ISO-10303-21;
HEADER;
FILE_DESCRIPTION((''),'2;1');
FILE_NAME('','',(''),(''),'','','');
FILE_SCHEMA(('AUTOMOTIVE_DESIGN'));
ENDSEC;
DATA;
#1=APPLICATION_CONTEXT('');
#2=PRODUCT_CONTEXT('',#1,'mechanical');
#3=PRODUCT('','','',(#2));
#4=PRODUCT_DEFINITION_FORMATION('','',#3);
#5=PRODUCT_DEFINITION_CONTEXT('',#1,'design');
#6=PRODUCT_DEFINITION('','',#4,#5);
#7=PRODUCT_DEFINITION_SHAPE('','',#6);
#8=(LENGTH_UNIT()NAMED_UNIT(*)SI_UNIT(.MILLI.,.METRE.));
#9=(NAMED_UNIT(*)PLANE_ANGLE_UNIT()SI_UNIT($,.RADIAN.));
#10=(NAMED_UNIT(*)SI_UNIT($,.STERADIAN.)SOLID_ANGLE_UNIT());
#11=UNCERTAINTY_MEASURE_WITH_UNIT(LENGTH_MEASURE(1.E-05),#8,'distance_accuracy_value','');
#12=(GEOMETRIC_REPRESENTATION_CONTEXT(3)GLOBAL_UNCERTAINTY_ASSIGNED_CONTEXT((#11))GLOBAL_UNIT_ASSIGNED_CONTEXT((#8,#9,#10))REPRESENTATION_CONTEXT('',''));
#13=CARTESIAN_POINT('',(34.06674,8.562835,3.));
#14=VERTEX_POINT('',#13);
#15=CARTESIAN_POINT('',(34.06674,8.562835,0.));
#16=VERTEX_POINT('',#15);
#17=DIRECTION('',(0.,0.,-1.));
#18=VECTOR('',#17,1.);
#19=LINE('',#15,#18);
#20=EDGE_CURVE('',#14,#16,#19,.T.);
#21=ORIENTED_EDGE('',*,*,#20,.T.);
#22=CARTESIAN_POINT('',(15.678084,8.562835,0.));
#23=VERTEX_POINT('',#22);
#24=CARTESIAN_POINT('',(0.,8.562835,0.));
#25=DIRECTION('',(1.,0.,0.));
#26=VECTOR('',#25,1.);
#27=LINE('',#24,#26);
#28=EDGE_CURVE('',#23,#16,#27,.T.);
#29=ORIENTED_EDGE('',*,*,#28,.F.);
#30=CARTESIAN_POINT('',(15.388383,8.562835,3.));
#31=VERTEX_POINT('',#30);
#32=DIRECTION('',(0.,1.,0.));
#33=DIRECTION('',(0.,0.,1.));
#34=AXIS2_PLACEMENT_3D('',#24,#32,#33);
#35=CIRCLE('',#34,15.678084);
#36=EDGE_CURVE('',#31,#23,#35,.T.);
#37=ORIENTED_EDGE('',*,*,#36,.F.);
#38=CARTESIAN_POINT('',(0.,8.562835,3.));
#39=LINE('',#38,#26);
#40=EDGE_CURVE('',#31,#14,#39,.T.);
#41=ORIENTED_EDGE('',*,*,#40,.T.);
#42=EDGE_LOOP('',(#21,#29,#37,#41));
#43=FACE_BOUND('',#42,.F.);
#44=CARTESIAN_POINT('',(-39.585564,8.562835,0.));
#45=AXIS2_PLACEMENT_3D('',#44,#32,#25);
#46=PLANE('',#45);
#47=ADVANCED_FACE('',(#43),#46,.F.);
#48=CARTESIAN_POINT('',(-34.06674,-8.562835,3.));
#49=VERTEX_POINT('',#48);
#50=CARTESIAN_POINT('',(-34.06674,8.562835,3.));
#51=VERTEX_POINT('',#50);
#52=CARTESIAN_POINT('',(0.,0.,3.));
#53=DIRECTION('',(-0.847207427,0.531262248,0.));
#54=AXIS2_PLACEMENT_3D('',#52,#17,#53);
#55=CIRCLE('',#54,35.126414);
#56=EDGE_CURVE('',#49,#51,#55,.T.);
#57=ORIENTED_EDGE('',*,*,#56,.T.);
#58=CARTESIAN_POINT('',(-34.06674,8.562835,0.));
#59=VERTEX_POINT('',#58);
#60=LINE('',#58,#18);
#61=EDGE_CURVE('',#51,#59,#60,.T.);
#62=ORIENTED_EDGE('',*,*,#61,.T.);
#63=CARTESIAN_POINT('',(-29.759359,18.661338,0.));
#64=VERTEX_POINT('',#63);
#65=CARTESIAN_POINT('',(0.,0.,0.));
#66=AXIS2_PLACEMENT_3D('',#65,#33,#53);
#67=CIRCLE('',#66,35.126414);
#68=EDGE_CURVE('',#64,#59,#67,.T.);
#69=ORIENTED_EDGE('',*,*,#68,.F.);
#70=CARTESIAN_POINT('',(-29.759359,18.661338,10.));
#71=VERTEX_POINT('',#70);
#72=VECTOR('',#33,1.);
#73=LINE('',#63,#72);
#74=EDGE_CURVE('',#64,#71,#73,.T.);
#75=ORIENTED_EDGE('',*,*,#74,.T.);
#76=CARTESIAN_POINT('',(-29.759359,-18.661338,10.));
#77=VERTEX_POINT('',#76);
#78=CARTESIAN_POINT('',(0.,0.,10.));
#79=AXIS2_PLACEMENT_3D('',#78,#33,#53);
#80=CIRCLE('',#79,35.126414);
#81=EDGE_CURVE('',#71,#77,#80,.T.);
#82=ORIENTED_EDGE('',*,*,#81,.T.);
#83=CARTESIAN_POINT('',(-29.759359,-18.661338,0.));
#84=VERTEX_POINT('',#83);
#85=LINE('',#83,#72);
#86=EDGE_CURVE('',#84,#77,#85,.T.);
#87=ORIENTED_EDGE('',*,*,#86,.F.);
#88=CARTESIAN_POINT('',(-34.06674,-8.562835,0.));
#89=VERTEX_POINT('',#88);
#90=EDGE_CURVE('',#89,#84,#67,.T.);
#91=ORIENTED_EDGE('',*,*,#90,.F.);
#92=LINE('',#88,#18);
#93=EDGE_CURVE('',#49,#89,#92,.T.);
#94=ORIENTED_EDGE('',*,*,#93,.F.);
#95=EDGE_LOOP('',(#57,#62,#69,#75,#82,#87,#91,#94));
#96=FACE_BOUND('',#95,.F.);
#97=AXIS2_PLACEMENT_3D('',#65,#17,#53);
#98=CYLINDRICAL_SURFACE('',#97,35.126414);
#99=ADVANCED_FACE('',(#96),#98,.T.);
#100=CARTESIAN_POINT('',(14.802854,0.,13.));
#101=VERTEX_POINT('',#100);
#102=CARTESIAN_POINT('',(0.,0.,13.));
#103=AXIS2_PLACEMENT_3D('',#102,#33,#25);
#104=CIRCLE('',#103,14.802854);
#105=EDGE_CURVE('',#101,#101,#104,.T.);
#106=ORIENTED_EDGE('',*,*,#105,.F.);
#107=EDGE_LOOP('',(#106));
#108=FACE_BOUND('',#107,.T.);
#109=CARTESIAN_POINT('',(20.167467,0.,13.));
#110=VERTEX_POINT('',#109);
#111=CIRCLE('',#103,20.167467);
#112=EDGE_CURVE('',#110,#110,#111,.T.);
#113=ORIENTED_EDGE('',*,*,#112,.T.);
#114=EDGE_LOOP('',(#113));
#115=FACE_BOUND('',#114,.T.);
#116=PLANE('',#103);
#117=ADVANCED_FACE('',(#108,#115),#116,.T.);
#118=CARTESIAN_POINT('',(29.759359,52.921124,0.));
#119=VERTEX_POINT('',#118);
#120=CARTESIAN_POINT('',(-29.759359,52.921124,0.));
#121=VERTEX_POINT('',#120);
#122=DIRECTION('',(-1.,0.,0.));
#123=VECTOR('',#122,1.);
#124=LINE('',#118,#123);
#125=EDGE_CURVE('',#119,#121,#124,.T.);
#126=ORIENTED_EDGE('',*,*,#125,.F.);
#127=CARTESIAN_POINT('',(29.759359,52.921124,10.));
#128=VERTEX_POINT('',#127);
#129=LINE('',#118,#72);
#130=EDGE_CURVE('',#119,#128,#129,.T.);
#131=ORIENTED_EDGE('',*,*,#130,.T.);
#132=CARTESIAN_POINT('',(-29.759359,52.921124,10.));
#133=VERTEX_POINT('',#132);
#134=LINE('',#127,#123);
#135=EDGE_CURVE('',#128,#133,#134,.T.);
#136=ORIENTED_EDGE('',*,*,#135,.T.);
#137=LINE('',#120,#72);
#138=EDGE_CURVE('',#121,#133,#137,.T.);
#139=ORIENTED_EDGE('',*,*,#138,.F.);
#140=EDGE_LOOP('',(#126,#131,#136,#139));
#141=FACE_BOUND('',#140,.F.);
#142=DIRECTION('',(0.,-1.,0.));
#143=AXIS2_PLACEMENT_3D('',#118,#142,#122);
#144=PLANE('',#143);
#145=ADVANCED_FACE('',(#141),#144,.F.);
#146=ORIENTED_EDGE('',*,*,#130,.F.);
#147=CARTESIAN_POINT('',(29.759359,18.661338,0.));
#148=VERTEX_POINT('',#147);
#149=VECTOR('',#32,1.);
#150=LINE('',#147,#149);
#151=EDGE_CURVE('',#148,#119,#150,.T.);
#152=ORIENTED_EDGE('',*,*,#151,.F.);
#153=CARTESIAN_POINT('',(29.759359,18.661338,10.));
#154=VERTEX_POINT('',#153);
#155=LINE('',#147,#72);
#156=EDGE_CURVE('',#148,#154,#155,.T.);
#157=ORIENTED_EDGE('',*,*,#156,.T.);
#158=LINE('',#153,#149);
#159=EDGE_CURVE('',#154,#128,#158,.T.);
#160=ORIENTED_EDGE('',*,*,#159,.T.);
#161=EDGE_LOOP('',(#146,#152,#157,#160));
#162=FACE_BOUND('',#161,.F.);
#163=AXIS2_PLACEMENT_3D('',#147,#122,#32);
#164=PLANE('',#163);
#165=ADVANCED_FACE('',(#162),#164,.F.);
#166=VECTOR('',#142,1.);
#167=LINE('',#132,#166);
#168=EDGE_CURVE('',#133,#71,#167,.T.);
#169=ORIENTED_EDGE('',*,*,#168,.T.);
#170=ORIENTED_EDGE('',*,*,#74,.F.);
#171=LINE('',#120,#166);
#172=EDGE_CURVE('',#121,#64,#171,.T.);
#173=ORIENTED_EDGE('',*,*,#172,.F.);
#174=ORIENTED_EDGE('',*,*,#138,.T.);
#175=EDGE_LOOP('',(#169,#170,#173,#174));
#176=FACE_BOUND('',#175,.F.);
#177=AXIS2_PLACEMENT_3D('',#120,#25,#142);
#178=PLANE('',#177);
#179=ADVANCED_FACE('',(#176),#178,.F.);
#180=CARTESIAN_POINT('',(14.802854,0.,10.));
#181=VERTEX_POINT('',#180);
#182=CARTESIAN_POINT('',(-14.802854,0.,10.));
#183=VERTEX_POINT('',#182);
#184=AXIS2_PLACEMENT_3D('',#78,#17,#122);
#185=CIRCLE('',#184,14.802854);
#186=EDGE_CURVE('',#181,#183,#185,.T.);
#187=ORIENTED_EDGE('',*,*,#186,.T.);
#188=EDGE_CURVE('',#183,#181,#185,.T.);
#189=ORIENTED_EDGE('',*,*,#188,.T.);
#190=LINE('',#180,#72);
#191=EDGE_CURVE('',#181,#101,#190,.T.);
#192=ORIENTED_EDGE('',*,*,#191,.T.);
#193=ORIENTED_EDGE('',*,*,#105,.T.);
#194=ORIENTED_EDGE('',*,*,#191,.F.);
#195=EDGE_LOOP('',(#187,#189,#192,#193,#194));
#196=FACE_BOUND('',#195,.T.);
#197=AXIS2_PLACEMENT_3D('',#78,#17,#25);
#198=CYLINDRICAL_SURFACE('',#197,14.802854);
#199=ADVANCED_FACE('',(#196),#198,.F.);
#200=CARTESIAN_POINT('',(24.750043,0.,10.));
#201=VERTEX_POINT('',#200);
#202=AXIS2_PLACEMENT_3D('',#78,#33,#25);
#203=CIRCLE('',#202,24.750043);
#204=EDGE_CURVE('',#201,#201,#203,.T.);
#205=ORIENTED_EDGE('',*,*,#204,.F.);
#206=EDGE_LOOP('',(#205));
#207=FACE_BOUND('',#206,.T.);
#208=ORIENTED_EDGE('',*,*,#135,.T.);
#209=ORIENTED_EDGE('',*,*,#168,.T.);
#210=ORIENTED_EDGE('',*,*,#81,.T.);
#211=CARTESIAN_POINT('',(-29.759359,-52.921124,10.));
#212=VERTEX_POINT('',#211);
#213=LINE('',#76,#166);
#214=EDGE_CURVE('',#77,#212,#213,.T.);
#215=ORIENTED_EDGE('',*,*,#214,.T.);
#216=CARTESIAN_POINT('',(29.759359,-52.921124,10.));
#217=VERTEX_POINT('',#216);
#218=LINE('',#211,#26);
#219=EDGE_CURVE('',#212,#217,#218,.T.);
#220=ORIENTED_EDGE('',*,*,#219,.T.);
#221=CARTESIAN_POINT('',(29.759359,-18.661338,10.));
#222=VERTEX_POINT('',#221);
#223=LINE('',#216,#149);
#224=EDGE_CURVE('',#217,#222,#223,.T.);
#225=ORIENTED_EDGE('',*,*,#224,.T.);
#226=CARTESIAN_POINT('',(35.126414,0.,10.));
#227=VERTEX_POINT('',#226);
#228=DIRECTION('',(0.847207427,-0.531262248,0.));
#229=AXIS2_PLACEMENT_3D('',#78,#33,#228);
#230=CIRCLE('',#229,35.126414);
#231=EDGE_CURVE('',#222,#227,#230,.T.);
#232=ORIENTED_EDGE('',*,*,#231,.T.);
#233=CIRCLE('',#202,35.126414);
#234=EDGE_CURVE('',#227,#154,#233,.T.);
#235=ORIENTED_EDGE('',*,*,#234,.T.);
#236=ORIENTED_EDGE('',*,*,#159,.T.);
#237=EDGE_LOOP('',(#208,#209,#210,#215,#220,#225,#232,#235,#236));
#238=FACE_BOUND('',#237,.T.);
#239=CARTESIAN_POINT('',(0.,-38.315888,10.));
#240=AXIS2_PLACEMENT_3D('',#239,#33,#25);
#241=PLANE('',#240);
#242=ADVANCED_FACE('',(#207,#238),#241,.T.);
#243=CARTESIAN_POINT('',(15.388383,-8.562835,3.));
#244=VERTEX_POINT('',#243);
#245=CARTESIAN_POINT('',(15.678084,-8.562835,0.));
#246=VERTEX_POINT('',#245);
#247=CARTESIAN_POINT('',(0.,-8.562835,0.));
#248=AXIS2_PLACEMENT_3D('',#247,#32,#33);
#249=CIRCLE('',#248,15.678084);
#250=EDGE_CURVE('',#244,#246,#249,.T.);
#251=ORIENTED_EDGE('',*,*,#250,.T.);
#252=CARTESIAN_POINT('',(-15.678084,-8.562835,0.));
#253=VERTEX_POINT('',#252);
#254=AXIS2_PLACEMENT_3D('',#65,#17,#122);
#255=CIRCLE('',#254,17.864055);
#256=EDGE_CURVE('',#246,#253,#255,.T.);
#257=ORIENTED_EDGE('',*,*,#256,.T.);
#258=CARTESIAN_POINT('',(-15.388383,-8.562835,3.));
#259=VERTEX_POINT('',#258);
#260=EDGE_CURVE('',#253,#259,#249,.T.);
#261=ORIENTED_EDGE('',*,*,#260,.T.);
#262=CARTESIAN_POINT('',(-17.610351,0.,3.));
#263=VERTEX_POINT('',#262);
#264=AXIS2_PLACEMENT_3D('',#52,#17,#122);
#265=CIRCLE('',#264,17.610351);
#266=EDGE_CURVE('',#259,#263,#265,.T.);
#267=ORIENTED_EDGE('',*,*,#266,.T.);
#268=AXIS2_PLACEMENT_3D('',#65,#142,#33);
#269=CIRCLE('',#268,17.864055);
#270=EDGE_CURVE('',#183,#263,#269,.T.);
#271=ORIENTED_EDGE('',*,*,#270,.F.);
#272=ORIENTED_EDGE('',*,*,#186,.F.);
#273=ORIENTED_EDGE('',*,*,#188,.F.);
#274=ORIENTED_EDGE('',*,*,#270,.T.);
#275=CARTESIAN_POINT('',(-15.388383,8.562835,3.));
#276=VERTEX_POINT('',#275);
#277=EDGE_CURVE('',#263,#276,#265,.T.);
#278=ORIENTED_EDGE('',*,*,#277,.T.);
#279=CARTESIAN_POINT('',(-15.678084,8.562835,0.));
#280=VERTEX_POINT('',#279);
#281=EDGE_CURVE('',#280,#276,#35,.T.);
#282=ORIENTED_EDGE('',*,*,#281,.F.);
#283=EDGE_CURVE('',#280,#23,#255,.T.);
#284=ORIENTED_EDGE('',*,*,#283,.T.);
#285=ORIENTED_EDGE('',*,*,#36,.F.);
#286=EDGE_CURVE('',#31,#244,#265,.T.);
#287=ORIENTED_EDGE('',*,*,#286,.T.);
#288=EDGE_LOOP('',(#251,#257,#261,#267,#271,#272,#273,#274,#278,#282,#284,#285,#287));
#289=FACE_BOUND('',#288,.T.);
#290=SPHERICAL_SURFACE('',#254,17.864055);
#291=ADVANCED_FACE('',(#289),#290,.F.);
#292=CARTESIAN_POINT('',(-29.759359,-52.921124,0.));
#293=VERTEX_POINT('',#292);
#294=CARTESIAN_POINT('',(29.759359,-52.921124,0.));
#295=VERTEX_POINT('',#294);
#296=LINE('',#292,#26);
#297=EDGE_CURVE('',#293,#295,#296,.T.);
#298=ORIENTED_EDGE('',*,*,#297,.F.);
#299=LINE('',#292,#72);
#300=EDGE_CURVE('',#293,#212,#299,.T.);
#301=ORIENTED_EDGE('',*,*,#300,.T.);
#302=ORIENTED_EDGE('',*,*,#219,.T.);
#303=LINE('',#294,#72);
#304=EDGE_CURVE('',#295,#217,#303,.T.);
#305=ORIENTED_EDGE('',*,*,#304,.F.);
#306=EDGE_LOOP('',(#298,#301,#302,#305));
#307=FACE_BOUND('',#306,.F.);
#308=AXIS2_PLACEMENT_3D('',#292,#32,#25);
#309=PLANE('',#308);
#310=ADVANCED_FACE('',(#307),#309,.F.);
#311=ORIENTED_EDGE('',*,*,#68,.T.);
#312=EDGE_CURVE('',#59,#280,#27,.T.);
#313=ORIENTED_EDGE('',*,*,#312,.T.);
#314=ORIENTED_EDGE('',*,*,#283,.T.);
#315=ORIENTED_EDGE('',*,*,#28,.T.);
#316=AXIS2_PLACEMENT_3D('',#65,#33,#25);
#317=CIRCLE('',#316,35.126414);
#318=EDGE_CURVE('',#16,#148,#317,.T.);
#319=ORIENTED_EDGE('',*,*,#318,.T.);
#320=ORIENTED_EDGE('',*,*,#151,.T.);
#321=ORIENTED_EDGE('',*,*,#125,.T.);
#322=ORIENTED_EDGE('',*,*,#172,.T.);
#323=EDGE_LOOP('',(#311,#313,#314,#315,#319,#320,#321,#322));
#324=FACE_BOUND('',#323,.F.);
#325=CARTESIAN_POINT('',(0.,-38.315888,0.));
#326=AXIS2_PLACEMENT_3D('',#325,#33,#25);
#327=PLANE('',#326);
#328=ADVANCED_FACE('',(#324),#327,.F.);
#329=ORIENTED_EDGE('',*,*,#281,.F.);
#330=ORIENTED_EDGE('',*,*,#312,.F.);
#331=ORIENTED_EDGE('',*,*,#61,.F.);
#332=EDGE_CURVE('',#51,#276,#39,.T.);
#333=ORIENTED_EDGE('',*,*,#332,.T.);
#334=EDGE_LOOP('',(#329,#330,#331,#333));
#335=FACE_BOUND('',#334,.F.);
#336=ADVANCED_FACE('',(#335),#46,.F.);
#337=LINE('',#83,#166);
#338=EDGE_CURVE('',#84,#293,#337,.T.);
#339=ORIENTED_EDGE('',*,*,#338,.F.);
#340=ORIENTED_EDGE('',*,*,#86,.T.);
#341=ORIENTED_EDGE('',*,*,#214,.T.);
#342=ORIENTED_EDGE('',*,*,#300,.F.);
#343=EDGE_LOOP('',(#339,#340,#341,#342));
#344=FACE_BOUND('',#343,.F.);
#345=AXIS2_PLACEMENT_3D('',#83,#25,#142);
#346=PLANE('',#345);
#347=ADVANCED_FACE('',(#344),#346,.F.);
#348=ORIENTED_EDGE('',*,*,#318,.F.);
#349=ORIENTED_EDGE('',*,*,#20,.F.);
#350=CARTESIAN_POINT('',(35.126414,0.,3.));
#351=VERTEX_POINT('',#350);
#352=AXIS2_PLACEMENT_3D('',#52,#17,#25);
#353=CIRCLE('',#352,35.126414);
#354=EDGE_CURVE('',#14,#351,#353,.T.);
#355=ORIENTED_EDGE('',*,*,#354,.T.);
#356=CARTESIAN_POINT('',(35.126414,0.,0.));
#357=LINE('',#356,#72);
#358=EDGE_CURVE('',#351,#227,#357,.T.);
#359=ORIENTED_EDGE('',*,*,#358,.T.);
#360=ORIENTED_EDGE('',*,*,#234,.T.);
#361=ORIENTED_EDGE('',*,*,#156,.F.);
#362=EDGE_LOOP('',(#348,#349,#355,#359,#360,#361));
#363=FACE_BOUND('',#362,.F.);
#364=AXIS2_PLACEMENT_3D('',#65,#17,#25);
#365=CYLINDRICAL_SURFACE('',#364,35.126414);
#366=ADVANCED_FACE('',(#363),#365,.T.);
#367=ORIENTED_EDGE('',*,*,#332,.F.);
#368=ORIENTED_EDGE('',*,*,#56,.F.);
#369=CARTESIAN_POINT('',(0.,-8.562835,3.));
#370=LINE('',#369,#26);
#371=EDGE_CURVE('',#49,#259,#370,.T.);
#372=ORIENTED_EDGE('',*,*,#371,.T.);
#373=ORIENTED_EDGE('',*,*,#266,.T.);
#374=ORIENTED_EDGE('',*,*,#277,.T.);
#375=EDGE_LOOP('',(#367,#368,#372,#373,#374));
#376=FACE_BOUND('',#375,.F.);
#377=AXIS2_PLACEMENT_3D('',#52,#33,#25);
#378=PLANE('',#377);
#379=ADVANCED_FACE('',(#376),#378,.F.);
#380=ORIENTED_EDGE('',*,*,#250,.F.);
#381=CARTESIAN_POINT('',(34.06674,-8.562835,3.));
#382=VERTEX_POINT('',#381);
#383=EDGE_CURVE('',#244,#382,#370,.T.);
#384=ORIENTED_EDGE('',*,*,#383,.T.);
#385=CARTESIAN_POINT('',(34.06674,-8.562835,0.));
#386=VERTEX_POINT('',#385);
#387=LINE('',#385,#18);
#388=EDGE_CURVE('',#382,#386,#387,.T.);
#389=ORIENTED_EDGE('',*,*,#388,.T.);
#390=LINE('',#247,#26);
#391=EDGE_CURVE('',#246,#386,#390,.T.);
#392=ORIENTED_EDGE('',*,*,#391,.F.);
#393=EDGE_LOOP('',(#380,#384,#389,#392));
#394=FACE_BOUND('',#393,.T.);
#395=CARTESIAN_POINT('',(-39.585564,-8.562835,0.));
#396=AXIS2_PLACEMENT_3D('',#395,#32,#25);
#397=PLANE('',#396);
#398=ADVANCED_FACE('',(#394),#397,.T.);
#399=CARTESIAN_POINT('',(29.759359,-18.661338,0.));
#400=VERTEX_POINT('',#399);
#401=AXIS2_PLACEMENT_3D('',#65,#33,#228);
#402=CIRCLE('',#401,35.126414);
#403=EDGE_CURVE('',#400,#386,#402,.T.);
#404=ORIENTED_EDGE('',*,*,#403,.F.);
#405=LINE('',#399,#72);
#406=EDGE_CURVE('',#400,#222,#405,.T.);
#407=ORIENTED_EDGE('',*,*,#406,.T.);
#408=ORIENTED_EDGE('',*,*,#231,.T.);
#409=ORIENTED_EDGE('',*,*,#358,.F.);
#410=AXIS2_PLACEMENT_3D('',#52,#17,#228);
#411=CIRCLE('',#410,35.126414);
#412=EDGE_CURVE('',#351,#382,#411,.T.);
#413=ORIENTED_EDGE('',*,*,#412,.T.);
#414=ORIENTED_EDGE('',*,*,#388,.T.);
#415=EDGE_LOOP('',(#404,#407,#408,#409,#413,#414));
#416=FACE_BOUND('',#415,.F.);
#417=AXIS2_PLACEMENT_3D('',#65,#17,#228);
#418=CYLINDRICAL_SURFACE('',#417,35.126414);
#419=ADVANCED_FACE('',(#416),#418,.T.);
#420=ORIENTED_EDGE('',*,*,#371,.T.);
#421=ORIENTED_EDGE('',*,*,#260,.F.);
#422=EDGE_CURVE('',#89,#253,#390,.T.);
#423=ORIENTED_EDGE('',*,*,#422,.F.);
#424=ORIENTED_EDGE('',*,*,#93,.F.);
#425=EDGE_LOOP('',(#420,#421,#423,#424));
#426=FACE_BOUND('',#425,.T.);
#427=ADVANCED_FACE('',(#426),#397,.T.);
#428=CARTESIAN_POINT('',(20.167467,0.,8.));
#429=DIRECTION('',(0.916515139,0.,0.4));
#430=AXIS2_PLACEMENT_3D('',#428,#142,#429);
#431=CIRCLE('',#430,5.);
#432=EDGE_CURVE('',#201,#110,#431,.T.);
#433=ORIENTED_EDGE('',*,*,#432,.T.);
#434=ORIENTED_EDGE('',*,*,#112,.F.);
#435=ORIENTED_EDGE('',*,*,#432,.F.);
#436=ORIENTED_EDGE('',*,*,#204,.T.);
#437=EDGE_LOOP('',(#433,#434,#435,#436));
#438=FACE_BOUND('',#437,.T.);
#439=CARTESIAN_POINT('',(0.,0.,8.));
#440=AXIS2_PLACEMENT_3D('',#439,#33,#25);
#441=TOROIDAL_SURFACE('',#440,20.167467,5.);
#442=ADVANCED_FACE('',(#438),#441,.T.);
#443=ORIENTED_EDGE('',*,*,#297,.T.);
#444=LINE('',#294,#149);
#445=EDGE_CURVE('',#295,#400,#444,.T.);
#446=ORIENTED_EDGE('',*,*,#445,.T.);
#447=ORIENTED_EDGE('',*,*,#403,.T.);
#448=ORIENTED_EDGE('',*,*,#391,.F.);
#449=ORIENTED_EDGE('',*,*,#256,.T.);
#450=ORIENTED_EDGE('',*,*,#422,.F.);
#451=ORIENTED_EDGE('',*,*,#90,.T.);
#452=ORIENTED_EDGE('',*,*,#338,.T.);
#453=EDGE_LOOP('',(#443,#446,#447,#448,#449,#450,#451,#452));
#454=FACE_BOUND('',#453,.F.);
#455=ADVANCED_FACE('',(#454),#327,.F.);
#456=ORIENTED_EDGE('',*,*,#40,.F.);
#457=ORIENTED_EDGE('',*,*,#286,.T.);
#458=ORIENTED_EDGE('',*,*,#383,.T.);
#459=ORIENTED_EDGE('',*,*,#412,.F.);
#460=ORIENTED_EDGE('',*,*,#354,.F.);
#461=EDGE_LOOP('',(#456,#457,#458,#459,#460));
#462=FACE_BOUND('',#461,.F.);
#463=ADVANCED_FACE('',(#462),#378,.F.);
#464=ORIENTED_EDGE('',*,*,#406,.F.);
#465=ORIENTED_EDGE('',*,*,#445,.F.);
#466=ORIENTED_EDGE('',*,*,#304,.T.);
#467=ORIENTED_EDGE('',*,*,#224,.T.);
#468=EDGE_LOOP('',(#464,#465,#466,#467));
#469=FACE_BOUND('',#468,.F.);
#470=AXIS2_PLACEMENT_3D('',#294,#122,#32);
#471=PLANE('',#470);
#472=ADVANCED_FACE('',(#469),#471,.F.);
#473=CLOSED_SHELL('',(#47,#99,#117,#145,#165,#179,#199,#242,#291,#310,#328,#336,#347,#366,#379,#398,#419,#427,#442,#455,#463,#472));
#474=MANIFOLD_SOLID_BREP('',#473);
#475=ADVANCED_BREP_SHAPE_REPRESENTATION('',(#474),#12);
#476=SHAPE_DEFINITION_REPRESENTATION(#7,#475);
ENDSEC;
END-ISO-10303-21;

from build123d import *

# Parameters (mm, degrees)
F1_DEPTH = 10
F2_W     = 79.171128571
F2_H     = 17.1256698668
F3_DEPTH = 3
F6_R     = 24.75004298
F6_R_2   = 14.8028536267
F7_DEPTH = 3


# Not quite as in the source:
# - a fillet or chamfer that OpenCascade refuses, or shapes differently, is made with other operations: its cross-section is extruded or revolved along the edge and cut away or added


with BuildPart() as f1:
    # F0 (on Top) → F1 (new body)
    with BuildSketch(Plane.XY):
        with BuildLine():
            Line((-29.7593586147, -18.6613375429), (-29.7593586147, -52.9211238027))
            Line((-29.7593586147, -52.9211238027), (29.7593586147, -52.9211238027))
            Line((29.7593586147, -52.9211238027), (29.7593586147, -18.6613375429))
            ThreePointArc((29.7593586147, -18.6613375429), (0, -35.1264137658), (-29.7593586147, -18.6613375429))
        make_face()
        with BuildLine():
            ThreePointArc((-29.7593586147, 18.6613375429), (-35.1264137658, 0), (-29.7593586147, -18.6613375429))
            Line((-29.7593586147, -18.6613375429), (-29.7593586147, 18.6613375429))
        make_face()
        with BuildLine():
            Line((-29.7593586147, 18.6613375429), (-29.7593586147, -18.6613375429))
            ThreePointArc((-29.7593586147, -18.6613375429), (0, -35.1264137658), (29.7593586147, -18.6613375429))
            Line((29.7593586147, -18.6613375429), (29.7593586147, 18.6613375429))
            ThreePointArc((29.7593586147, 18.6613375429), (0, 35.1264137658), (-29.7593586147, 18.6613375429))
        make_face()
        with BuildLine():
            Line((29.7593586147, 18.6613375429), (29.7593586147, -18.6613375429))
            ThreePointArc((29.7593586147, -18.6613375429), (33.7579952615, -9.7088979792), (35.1264137658, 0))
            ThreePointArc((35.1264137658, 0), (33.7579952615, 9.7088979792), (29.7593586147, 18.6613375429))
        make_face()
        with BuildLine():
            Line((-29.7593586147, 52.9211238027), (-29.7593586147, 18.6613375429))
            ThreePointArc((-29.7593586147, 18.6613375429), (0, 35.1264137658), (29.7593586147, 18.6613375429))
            Line((29.7593586147, 18.6613375429), (29.7593586147, 52.9211238027))
            Line((29.7593586147, 52.9211238027), (-29.7593586147, 52.9211238027))
        make_face()
    extrude(amount=F1_DEPTH)

    # F2 (on Top) → F3 (cut)
    with BuildSketch(Plane.XY):
        Rectangle(F2_W, F2_H)
    extrude(amount=F3_DEPTH, mode=Mode.SUBTRACT)

    # F4 (on Front) → F5 (revolve, cut)
    with BuildSketch(Plane.XZ):
        with BuildLine():
            Line((0, -17.8640554044), (0, 17.8640554044))
            ThreePointArc((0, 17.8640554044), (-17.8640554044, 0), (0, -17.8640554044))
        make_face()
    revolve(axis=Axis((0, 0, 2.6136357337), (0, 0, 1)), mode=Mode.SUBTRACT)

    # F6 (on face) → F7 (join)
    with BuildSketch(Plane.XY.offset(10)):
        Circle(F6_R)
        Circle(F6_R_2, mode=Mode.SUBTRACT)
    extrude(amount=F7_DEPTH)

    # F8: fillet of radius 5 on 1 edges, made by hand

    # F8_s1 → F8_t2 (revolve, cut)
    with BuildSketch(Plane.XZ):
        with BuildLine():
            ThreePointArc((24.75004298, 10), (22.9060800725, 12.1833001327), (20.167467285, 13))
            Line((20.167467285, 13), (24.75004298, 13))
            Line((24.75004298, 13), (24.75004298, 10))
        make_face()
    revolve(axis=Axis((0, 0, 13), (0, 0, 1)), mode=Mode.SUBTRACT)


solid = f1.part
